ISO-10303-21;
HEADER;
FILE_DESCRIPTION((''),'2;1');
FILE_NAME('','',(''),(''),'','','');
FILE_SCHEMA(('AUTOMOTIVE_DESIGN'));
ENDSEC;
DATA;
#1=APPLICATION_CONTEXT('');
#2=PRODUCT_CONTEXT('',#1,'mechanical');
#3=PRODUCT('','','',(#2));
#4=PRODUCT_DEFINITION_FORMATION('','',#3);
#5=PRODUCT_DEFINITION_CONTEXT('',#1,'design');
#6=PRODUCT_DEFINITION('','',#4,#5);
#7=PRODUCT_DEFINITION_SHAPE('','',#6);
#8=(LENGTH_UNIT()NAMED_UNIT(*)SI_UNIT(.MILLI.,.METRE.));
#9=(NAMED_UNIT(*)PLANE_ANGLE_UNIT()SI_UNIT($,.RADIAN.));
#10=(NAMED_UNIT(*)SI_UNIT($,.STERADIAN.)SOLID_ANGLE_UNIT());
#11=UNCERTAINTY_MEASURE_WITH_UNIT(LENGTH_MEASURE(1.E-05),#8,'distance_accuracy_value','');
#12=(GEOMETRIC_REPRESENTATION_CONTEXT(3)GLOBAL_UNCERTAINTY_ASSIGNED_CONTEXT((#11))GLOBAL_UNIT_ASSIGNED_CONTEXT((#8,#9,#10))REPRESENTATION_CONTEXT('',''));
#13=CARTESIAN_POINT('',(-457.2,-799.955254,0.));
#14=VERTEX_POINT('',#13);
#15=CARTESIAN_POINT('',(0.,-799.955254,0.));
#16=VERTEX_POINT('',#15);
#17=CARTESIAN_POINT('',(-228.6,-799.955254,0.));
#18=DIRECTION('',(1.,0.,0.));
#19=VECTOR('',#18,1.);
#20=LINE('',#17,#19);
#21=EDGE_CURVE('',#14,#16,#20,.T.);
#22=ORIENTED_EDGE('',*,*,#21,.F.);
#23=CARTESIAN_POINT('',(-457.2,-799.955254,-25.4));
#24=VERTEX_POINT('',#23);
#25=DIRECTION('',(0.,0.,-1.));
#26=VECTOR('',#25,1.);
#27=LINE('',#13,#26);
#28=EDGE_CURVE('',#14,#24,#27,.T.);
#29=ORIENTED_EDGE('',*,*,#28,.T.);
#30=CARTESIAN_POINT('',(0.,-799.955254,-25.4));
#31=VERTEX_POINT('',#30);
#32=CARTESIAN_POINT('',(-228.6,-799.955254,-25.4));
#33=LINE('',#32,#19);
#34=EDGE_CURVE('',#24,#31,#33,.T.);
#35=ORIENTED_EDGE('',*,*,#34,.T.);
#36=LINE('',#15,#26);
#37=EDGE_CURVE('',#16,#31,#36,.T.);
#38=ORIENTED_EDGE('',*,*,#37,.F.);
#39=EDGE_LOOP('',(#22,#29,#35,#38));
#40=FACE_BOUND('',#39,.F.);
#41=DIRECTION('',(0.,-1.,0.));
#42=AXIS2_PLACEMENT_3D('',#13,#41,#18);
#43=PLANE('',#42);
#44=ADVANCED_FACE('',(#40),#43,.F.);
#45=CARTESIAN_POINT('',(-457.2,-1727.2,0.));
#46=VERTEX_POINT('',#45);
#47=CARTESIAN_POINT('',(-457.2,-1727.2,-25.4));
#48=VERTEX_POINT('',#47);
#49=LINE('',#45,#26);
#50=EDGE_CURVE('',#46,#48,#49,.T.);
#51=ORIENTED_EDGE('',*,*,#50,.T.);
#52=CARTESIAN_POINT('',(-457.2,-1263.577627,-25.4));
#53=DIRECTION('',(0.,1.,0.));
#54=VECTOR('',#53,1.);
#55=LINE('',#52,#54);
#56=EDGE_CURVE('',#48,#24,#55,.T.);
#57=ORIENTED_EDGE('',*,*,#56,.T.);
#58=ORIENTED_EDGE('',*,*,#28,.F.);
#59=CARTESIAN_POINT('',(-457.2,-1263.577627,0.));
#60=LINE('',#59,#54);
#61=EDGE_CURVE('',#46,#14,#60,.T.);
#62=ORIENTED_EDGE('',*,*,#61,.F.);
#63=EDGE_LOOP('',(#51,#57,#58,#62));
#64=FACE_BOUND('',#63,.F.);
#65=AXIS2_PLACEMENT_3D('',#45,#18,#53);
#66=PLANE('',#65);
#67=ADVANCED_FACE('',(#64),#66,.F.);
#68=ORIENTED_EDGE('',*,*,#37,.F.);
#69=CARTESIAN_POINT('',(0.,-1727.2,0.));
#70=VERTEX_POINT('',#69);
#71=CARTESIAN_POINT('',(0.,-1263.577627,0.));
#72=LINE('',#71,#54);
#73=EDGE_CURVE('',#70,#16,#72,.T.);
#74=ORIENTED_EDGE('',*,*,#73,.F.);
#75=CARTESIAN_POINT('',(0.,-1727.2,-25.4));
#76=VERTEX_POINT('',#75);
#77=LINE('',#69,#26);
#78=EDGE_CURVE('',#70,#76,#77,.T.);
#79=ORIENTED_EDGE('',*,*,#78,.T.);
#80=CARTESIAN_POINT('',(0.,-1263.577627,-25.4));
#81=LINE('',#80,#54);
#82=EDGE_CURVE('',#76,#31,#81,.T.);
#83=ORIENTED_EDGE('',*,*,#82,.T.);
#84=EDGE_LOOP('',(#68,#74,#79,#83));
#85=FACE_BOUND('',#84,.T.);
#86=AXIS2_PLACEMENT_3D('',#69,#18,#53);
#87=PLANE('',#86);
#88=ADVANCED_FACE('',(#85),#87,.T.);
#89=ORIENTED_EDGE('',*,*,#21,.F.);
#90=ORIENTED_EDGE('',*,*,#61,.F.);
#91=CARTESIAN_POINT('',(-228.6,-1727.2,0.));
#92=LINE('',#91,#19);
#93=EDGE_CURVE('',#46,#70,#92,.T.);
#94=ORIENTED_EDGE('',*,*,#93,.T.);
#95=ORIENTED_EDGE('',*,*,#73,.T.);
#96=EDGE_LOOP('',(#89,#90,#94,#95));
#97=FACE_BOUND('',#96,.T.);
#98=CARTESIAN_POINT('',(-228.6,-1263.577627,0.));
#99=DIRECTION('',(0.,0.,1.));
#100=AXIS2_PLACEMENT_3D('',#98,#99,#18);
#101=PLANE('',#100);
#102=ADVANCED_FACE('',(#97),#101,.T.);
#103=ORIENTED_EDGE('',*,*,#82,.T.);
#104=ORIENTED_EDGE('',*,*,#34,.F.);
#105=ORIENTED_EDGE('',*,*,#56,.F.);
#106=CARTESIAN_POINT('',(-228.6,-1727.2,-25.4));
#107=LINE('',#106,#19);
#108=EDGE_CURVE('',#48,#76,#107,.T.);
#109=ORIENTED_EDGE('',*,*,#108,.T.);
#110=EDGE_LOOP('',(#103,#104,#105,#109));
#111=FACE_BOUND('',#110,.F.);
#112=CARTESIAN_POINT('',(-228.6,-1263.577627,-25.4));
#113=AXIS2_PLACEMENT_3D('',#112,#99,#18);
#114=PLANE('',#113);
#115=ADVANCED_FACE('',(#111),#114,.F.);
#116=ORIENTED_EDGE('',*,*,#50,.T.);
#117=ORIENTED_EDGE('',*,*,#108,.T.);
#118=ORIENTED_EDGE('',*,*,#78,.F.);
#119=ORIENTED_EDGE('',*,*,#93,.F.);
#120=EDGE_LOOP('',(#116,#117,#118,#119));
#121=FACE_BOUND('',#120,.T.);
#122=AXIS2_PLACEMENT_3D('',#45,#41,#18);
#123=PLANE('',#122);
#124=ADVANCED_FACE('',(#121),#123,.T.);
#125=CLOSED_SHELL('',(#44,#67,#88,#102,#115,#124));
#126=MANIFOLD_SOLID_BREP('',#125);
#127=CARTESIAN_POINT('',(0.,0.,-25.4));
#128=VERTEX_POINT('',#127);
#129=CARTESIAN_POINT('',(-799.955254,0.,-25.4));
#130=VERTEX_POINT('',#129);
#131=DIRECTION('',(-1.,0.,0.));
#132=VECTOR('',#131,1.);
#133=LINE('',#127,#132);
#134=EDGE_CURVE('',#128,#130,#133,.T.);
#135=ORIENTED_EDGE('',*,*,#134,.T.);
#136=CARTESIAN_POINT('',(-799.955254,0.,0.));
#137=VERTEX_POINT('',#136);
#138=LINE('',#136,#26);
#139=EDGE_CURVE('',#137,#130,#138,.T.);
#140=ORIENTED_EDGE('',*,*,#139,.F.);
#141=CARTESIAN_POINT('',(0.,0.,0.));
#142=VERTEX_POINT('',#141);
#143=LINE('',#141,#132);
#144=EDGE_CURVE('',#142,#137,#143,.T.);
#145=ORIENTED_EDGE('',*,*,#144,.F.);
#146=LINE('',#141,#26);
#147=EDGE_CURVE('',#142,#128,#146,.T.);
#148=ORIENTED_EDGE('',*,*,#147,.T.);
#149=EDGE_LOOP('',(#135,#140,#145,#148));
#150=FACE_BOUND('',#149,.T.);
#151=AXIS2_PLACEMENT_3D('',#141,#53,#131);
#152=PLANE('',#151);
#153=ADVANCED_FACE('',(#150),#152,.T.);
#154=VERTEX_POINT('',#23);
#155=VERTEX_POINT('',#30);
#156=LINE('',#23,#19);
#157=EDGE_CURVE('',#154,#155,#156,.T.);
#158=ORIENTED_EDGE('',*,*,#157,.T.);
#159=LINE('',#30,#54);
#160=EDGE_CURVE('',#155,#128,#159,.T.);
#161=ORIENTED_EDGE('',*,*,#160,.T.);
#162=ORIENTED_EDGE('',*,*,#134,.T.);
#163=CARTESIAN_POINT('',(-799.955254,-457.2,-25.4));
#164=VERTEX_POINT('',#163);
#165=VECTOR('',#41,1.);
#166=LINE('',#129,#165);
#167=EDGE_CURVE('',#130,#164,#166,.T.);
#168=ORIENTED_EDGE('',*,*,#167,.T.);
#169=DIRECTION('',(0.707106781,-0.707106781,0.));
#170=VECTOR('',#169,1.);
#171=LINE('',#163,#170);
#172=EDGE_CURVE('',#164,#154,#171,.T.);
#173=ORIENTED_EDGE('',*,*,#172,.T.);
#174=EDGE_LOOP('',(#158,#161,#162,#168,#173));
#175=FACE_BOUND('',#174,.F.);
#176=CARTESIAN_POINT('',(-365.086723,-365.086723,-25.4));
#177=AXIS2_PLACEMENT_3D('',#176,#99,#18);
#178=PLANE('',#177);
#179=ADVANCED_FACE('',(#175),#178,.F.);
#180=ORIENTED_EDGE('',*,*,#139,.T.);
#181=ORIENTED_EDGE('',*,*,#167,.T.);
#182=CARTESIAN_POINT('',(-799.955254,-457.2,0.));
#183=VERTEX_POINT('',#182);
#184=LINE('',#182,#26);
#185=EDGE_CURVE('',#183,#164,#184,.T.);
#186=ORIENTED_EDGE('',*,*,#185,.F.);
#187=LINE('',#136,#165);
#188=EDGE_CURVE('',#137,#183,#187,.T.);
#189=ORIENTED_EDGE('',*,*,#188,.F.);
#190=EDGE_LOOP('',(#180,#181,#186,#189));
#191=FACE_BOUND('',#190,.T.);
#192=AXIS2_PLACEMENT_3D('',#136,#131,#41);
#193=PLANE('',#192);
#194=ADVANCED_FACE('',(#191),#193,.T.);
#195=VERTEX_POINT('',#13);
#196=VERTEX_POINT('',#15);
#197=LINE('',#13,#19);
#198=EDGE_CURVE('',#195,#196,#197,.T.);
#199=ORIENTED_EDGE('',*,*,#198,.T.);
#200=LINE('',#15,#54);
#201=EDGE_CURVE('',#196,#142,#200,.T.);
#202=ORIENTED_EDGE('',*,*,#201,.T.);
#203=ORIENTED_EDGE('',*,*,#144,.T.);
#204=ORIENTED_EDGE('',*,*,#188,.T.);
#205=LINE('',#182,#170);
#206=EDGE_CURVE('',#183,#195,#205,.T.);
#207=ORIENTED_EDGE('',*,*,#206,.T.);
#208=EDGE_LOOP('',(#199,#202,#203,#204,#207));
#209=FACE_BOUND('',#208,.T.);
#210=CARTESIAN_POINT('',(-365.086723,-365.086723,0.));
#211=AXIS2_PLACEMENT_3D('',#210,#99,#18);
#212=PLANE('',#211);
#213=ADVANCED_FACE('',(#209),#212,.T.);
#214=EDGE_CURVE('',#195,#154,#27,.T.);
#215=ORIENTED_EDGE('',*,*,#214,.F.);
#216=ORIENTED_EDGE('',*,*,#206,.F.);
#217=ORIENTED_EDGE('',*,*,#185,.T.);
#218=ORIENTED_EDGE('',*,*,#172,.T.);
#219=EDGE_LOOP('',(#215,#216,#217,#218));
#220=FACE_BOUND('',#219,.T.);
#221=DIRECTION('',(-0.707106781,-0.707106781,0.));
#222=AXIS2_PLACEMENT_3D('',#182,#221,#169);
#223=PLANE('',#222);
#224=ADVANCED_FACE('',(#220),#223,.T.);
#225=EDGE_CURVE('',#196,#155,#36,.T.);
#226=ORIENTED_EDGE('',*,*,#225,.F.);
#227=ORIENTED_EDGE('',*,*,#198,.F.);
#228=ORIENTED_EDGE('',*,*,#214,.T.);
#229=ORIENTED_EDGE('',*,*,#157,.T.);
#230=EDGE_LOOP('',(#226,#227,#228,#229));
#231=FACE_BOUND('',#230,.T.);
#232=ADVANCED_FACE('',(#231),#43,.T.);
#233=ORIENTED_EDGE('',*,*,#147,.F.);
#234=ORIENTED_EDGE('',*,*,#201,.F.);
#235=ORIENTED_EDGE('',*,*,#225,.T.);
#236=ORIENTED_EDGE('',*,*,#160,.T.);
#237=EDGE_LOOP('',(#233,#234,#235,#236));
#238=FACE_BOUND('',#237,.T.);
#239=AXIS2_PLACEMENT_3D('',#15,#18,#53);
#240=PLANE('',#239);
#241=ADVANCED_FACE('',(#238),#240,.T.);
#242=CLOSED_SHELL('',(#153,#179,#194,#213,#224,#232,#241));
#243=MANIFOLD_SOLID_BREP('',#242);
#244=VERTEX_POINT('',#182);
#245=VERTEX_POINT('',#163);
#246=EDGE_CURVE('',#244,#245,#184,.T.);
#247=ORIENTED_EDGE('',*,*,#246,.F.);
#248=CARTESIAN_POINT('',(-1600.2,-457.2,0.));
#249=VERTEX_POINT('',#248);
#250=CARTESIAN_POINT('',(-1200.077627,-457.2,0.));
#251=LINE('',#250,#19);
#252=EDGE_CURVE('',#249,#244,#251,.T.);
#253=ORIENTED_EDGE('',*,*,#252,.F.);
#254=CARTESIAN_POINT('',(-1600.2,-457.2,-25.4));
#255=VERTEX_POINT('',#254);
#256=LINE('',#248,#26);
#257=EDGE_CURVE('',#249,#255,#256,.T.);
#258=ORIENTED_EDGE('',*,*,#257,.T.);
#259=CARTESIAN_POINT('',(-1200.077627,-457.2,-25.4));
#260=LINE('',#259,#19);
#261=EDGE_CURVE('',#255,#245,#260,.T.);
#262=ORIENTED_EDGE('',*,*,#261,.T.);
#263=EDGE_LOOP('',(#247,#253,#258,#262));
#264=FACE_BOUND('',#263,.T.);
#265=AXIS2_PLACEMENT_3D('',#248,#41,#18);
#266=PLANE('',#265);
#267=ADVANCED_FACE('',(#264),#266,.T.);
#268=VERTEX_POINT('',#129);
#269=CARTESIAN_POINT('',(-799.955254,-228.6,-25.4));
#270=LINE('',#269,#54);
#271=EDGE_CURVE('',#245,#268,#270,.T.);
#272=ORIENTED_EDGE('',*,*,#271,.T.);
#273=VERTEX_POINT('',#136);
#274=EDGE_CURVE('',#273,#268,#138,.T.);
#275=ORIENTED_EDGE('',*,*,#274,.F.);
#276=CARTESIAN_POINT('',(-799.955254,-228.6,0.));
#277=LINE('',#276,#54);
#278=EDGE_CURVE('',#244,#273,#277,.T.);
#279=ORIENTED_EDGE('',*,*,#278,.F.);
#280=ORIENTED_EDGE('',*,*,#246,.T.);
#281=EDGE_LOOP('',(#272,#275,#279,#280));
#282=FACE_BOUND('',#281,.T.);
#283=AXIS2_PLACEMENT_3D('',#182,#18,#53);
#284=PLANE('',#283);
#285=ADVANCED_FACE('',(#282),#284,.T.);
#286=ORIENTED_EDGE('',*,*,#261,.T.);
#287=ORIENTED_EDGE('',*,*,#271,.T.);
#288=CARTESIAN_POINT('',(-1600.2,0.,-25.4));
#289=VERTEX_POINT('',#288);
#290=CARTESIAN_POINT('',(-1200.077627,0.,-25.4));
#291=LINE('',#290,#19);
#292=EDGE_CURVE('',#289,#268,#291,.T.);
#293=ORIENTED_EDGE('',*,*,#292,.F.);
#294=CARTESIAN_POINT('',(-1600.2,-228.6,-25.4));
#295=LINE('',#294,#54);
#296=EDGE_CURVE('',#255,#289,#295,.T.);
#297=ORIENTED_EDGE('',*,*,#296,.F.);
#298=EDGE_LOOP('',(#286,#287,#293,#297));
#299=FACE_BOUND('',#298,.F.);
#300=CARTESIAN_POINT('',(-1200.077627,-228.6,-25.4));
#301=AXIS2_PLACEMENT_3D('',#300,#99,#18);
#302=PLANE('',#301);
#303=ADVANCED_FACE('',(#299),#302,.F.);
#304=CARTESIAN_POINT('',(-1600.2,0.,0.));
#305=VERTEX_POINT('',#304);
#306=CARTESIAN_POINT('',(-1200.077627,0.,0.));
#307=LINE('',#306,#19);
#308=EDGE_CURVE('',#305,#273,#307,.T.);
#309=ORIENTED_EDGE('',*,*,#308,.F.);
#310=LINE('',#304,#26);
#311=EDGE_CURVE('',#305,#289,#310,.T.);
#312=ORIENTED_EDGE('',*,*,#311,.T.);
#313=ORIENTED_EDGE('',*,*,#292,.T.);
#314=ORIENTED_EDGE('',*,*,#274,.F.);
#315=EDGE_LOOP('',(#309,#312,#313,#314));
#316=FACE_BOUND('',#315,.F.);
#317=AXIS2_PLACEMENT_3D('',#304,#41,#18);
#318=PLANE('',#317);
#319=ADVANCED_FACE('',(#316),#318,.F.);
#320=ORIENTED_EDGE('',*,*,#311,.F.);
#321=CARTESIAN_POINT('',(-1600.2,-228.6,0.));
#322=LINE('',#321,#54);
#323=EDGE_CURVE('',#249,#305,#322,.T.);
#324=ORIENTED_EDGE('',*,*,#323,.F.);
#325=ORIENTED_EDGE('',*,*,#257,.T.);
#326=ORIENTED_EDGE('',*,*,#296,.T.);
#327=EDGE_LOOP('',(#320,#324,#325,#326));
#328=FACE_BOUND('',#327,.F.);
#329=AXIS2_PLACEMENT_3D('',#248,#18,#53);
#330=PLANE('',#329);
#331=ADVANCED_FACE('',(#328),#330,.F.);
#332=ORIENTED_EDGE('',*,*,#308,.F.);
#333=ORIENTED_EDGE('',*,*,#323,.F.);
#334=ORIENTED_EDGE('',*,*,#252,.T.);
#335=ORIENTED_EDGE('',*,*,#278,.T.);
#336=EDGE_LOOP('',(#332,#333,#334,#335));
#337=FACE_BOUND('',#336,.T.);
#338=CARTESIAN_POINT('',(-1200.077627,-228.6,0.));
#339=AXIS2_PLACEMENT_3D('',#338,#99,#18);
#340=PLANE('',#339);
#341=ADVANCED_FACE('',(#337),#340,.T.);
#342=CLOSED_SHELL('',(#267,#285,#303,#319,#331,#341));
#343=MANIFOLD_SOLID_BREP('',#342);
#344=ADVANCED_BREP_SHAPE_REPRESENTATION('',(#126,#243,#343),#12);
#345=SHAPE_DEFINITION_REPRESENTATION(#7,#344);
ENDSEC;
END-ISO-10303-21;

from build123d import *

# Parameters (mm, degrees)
F2_W     = 800.2447458586
F2_H     = 457.2
F4_DEPTH = 25.4
F5_DEPTH = 25.4
F3_W     = 457.2
F3_H     = 927.2447458586
F6_DEPTH = 25.4


with BuildPart() as f4:
    # F2 (on face) → F4 (new body)
    with BuildSketch(Plane.XY):
        with Locations((-1200.0776270707, -228.6)):
            Rectangle(F2_W, F2_H)
    extrude(amount=-F4_DEPTH)


with BuildPart() as f5:
    # F3 (on face) → F5 (new body)
    with BuildSketch(Plane.XY):
        Polygon((-457.2, -799.9552541414), (0, -799.9552541414), (0, 0), (-799.9552541414, 0), (-799.9552541414, -457.2), align=None)
    extrude(amount=-F5_DEPTH)


with BuildPart() as f6:
    # F3 (on face) → F6 (new body)
    with BuildSketch(Plane.XY):
        with Locations((-228.6, -1263.5776270707)):
            Rectangle(F3_W, F3_H)
    extrude(amount=-F6_DEPTH)


solid = Compound([f4.part, f5.part, f6.part])
